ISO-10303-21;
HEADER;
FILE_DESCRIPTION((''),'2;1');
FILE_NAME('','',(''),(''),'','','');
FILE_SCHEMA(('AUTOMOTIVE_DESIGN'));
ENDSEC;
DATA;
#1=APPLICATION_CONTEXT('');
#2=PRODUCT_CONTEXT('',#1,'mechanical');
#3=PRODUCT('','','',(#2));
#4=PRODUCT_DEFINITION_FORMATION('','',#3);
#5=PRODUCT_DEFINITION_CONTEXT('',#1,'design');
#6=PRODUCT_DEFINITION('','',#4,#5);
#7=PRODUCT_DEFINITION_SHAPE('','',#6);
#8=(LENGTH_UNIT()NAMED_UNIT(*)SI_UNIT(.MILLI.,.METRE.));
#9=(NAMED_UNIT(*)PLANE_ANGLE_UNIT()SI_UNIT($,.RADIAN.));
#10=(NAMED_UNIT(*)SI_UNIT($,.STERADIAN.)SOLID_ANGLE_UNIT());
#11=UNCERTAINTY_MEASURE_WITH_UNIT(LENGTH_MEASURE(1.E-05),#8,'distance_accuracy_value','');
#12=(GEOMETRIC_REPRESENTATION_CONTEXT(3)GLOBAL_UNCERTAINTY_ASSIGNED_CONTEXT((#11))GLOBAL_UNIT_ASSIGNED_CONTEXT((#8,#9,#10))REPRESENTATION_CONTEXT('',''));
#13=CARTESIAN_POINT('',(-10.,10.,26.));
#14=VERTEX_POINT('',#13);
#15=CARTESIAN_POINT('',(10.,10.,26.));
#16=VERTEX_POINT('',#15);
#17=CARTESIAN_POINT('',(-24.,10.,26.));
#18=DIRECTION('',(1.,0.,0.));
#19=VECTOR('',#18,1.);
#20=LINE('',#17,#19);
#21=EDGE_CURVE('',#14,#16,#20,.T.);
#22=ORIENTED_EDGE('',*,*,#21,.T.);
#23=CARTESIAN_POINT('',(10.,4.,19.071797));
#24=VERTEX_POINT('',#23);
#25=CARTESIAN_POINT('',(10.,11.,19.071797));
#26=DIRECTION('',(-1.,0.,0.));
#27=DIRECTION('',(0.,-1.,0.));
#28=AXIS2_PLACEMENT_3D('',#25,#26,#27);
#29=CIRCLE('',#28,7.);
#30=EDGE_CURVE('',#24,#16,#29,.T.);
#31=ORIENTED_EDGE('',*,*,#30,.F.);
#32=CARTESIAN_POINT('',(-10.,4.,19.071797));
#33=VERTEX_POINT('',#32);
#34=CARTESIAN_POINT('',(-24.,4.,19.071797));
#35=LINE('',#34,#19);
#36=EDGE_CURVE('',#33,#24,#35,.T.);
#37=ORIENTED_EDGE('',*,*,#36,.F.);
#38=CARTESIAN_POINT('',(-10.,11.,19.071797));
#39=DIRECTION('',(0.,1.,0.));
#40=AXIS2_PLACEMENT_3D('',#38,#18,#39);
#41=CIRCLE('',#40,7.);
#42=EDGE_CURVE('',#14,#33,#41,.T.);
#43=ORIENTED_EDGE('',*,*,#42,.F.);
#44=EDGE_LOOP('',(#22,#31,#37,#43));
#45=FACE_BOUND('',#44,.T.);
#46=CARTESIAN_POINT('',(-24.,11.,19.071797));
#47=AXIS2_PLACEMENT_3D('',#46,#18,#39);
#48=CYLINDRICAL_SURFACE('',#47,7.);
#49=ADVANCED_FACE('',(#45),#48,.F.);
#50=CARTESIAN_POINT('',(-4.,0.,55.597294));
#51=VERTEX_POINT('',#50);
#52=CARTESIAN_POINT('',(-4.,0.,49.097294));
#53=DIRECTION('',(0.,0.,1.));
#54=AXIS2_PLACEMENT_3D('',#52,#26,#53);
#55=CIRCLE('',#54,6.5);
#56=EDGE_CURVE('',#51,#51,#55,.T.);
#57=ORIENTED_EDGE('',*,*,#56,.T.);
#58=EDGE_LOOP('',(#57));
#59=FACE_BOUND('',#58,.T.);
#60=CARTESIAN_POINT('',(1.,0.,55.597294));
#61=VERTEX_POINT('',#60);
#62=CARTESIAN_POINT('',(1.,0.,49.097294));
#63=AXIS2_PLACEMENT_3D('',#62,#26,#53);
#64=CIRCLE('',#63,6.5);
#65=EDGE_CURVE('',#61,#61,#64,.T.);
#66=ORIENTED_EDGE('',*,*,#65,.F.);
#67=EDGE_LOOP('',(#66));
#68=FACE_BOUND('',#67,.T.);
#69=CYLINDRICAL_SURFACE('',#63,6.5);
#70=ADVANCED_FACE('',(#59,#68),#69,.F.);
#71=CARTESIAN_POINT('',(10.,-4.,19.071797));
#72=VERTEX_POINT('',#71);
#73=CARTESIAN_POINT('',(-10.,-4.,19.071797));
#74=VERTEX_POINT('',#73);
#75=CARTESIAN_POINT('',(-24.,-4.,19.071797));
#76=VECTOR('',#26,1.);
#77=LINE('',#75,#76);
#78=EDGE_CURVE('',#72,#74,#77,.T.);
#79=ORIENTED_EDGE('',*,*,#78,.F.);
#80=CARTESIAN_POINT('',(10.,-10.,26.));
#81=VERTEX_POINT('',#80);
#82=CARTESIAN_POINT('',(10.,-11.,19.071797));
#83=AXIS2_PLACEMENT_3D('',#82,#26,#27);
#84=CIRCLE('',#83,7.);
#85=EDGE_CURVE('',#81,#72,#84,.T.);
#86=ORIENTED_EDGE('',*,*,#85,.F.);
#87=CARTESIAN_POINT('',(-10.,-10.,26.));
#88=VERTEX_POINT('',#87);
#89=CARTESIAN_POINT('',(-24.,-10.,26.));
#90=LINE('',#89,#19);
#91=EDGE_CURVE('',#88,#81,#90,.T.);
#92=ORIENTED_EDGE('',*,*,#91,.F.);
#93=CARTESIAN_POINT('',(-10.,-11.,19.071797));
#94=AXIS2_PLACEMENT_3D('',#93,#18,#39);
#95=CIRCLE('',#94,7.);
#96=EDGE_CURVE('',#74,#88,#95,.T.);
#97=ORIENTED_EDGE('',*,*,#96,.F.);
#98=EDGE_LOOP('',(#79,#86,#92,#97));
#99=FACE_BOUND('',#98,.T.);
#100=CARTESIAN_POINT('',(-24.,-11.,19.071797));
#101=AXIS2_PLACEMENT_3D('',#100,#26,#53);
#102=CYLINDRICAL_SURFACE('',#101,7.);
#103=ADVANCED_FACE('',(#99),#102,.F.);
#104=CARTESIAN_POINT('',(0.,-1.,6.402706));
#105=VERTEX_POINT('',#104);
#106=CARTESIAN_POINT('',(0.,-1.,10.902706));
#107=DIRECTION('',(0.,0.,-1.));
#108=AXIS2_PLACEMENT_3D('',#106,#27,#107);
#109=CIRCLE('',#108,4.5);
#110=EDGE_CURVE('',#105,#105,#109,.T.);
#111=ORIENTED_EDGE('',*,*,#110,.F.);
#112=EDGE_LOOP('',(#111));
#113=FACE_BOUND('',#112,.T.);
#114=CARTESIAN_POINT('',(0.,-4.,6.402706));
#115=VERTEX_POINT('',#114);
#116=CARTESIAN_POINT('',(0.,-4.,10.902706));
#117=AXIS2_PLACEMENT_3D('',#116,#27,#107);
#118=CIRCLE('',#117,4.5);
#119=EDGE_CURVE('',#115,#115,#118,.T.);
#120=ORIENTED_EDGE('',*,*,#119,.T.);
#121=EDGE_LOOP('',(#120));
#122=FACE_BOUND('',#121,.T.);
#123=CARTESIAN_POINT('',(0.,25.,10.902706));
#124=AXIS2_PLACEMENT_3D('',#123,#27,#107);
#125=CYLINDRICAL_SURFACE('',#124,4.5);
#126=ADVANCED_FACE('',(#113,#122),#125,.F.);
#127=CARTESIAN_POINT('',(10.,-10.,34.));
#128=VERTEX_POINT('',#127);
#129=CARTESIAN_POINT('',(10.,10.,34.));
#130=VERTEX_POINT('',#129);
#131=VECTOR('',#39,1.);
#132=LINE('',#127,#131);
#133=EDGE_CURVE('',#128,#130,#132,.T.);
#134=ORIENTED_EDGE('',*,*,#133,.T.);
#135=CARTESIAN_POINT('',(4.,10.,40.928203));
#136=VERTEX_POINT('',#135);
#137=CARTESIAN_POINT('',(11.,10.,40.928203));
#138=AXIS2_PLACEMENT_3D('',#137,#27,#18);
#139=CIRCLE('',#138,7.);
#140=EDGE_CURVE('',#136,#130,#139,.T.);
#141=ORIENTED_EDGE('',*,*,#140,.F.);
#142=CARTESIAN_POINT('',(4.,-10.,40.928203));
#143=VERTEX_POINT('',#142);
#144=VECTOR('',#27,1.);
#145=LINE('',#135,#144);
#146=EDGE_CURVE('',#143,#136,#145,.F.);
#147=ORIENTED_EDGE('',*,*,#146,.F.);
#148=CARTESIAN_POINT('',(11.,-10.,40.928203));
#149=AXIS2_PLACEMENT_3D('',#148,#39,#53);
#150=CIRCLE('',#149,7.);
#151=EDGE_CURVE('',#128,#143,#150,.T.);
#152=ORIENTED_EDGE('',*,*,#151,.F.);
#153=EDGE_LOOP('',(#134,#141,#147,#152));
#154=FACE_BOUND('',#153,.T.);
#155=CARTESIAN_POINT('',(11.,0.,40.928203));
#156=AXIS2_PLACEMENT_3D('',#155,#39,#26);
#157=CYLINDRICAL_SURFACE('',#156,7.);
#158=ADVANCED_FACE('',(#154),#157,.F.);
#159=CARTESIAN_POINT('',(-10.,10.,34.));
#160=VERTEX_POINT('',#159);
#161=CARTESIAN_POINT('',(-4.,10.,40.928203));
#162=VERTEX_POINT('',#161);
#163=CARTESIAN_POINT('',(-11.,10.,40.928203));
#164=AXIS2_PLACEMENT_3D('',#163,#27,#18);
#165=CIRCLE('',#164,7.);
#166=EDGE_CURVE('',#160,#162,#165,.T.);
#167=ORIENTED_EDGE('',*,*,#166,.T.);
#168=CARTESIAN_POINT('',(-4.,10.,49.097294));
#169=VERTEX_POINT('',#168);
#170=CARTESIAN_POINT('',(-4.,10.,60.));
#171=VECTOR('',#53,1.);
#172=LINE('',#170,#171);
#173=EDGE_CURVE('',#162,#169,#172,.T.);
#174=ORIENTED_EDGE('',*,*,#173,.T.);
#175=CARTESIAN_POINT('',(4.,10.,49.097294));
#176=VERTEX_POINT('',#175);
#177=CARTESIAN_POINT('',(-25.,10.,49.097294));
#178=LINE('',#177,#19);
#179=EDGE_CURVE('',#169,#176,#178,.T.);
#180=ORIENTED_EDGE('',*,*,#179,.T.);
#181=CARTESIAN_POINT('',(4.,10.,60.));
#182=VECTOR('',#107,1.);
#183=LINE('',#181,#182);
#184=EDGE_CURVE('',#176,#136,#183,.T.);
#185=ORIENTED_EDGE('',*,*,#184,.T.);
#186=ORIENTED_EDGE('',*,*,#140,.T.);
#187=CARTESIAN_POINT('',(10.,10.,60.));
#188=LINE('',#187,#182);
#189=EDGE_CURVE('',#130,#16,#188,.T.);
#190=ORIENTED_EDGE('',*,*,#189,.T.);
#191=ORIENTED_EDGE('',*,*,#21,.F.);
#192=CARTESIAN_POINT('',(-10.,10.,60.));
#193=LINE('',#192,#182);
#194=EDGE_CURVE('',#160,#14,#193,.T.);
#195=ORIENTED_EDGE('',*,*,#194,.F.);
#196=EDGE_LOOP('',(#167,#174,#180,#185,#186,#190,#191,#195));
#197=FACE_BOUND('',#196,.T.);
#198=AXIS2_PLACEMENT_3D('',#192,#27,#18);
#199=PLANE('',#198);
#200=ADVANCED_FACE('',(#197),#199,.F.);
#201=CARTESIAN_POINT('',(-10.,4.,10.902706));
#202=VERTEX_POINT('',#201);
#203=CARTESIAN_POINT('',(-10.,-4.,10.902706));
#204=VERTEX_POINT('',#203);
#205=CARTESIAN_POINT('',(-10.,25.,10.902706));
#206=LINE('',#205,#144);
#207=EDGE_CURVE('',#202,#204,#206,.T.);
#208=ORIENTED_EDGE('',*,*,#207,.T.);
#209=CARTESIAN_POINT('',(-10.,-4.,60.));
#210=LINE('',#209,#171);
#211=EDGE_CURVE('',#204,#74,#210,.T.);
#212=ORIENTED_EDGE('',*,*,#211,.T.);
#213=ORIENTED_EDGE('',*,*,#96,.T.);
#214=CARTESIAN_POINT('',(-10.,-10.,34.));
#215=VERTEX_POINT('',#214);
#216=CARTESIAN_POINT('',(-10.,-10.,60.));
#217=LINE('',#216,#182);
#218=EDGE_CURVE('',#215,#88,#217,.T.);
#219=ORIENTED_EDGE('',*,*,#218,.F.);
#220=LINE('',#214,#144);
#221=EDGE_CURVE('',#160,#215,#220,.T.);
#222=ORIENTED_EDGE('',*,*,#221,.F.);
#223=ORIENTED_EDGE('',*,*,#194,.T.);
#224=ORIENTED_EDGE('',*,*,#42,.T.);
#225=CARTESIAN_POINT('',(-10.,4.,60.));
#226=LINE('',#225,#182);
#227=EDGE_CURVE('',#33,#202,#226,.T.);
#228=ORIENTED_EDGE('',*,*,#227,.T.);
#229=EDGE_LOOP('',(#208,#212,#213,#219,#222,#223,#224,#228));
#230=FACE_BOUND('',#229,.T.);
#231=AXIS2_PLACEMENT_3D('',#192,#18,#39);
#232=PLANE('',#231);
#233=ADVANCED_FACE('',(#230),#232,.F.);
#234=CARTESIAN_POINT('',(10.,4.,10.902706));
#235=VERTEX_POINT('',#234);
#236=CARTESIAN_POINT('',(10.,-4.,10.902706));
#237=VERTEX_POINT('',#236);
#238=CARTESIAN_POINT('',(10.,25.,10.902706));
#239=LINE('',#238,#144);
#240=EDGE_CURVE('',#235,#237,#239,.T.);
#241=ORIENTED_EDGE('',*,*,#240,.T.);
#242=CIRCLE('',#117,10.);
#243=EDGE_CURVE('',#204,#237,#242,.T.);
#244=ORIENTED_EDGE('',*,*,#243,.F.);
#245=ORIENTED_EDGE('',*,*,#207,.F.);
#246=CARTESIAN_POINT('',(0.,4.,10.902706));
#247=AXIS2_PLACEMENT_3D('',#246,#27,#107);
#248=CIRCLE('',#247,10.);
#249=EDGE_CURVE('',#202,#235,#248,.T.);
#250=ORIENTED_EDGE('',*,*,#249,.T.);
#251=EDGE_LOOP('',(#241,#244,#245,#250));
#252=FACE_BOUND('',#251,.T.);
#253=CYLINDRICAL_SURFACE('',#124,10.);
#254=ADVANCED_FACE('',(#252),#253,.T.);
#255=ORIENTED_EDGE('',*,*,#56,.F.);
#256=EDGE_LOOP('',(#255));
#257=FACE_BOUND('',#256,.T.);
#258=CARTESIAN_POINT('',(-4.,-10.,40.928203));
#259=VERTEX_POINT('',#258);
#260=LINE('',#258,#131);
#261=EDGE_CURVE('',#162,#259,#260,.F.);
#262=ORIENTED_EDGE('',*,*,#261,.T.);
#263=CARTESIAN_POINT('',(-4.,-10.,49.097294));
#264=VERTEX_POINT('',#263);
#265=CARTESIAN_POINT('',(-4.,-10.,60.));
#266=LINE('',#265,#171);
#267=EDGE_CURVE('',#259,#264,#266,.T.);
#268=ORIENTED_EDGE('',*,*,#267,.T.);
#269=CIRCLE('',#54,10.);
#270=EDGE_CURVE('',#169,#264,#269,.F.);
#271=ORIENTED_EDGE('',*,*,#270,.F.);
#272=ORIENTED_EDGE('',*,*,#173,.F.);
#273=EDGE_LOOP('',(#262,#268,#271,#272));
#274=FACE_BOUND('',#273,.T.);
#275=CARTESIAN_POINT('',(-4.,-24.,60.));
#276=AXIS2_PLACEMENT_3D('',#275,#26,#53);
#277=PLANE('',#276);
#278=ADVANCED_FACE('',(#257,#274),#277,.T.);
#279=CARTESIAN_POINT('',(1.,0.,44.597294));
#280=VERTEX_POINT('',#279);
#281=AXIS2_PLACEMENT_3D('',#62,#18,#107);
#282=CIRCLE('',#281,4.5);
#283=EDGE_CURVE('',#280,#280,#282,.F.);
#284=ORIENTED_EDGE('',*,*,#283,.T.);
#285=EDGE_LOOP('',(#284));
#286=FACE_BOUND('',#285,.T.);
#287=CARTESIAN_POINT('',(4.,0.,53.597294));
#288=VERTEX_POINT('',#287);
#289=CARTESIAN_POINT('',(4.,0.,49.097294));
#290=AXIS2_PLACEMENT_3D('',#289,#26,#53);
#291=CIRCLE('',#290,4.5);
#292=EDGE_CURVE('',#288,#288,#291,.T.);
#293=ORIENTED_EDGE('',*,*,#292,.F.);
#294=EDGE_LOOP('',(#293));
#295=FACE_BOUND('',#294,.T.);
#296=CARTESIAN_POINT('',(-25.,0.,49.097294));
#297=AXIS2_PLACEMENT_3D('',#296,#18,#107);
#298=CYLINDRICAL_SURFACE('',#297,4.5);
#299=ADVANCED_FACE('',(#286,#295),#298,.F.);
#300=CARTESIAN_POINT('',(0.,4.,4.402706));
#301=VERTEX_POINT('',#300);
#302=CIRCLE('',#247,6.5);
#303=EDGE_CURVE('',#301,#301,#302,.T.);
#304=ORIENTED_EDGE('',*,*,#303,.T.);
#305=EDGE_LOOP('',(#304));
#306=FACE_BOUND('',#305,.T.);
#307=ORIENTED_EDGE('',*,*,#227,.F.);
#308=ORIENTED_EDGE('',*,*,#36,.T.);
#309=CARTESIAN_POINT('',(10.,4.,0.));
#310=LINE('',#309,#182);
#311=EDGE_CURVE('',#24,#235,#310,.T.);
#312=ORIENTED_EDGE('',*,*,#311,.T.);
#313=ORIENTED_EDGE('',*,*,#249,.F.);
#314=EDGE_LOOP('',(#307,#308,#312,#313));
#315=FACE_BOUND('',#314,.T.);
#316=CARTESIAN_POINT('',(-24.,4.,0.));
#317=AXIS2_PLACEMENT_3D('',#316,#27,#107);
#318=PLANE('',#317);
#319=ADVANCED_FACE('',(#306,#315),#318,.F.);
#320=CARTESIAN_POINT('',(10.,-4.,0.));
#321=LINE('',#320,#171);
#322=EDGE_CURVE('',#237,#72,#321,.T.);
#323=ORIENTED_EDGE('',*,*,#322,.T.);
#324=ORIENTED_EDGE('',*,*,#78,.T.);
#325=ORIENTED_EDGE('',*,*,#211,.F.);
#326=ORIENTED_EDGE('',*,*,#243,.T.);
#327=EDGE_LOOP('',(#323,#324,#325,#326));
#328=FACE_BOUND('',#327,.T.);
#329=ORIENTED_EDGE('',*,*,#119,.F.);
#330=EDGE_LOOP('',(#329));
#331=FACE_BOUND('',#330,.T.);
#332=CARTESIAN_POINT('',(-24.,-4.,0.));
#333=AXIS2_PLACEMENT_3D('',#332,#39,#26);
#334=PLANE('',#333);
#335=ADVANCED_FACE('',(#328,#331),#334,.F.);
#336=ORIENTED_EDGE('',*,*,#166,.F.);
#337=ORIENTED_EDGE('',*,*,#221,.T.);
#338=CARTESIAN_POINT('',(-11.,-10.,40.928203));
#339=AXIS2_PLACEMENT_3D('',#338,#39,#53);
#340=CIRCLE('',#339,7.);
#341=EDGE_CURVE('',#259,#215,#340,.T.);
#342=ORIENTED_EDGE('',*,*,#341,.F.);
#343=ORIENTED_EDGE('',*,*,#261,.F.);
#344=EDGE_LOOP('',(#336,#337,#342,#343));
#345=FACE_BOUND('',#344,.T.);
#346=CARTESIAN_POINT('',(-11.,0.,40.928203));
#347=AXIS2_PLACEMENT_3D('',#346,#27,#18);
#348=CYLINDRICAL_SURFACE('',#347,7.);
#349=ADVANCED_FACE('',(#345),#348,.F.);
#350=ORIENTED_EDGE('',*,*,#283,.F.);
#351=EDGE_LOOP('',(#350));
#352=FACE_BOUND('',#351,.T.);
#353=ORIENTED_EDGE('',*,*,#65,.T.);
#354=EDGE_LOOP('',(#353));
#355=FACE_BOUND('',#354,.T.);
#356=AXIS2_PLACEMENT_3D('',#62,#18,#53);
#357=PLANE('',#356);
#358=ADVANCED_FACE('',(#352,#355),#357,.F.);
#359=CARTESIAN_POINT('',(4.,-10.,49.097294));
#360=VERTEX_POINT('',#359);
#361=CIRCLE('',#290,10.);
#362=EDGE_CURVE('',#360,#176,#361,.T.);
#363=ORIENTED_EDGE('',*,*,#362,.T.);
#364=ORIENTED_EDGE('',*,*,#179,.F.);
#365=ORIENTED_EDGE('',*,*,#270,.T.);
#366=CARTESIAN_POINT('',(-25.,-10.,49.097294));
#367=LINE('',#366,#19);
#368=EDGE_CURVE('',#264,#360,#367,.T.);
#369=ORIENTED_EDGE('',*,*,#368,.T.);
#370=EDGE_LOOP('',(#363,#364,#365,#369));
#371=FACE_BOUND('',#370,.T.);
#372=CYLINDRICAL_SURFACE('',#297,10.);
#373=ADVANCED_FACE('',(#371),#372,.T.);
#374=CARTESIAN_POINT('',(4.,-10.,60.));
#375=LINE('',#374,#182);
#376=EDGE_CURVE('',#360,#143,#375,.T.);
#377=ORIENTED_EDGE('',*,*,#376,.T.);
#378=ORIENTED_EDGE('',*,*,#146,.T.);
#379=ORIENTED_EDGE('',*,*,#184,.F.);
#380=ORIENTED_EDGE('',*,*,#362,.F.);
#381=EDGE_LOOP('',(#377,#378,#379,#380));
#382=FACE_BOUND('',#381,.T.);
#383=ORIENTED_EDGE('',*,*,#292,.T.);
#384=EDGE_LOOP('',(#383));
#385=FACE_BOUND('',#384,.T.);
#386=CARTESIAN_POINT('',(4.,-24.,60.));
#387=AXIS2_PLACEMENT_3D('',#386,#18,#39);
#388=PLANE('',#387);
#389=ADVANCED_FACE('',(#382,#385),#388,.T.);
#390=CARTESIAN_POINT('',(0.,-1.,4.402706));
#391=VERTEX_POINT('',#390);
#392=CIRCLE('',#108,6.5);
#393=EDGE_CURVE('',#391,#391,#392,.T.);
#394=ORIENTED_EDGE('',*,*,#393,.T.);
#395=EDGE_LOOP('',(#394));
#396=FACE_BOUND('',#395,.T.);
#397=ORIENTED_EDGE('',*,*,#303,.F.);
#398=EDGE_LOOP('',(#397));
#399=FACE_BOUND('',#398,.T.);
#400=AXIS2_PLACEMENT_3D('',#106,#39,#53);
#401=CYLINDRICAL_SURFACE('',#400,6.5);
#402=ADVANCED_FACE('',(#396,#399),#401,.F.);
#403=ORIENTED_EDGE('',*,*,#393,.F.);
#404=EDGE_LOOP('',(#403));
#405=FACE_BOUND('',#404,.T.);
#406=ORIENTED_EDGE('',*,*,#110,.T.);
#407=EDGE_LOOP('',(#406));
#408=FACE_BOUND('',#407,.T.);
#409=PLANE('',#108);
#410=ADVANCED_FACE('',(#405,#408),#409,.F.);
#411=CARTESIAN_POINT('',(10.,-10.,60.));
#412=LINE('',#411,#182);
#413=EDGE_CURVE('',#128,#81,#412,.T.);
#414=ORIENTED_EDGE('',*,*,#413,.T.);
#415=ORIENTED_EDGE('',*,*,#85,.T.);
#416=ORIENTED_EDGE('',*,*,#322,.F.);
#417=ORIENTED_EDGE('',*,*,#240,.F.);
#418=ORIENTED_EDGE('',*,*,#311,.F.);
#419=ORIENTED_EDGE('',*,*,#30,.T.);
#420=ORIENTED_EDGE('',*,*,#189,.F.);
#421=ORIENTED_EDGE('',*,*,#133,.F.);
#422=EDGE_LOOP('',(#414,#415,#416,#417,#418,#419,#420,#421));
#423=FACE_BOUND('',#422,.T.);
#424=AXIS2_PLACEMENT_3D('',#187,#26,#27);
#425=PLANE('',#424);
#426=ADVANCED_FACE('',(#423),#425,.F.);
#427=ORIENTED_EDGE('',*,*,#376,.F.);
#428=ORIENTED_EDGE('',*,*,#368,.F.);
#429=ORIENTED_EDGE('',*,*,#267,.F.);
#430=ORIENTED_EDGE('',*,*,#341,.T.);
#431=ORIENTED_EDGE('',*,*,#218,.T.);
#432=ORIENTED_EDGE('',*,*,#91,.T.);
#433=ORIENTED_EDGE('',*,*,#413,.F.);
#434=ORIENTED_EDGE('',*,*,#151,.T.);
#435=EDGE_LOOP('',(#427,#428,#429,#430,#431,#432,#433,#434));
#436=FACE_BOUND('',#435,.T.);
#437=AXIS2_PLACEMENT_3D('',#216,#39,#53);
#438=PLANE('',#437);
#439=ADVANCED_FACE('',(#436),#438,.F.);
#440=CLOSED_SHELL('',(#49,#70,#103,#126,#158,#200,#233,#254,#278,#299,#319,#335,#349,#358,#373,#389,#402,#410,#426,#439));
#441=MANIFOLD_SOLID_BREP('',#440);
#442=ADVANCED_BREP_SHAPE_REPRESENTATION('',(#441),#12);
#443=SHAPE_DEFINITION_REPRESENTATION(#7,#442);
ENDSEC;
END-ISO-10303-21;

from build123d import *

# Parameters (mm, degrees)
SKETCH_1_W          = 20
SKETCH_1_H          = 20
EXTRUDE_1_DEPTH     = 60
SKETCH_7_W          = 26
SKETCH_7_H          = 6
CUT_EXTRUDE_6_DEPTH = 34
SKETCH_2_R          = 6.5
CUT_EXTRUDE_9_DEPTH = 5
SKETCH_3_R          = 4.5
CUT_EXTRUDE_2_DEPTH = 29
MOVE_BODY_1_ANGLE   = 90
SKETCH_8_W          = 20
SKETCH_8_H          = 20
EXTRUDE_2_DEPTH     = 8
FILLET_2_R          = 7


# Read off the part's stored shape, not the designer's step: 교차3
with BuildPart() as part:
    # 스케치1 → 보스-돌출1 (new body)
    with BuildSketch(Plane.XY):
        Rectangle(SKETCH_1_W, SKETCH_1_H)
    extrude(amount=EXTRUDE_1_DEPTH)

    # 스케치7 → 컷-돌출6 (cut)
    with BuildSketch(Plane(origin=(10, 0, 0), x_dir=(0, 0, -1), z_dir=(1, 0, 0))):
        with Locations((-13, 7)):
            Rectangle(SKETCH_7_W, SKETCH_7_H)
        with Locations((-13, -7)):
            Rectangle(SKETCH_7_W, SKETCH_7_H)
    cut_extrude_6 = extrude(amount=-CUT_EXTRUDE_6_DEPTH, mode=Mode.SUBTRACT)

    # 스케치2 → 컷-돌출9 (cut)
    with BuildSketch(Plane(origin=(0, 4, 0), x_dir=(-1, 0, 0), z_dir=(0, -1, 0))):
        with Locations(Location((0, -10.902706153, 0), (0, 0, 90))):
            Circle(SKETCH_2_R)
    cut_extrude_9 = extrude(amount=CUT_EXTRUDE_9_DEPTH, mode=Mode.SUBTRACT)

    # 스케치3 → 컷-돌출2 (cut)
    with BuildSketch(Plane(origin=(0, -4, 0), x_dir=(-1, 0, 0), z_dir=(0, -1, 0))):
        with Locations(Location((0, -10.902706153, 0), (0, 0, 90))):
            Circle(SKETCH_3_R)
        with BuildLine():
            Line((-21.262122506, -10.902706153), (-10, -10.902706153))
            ThreePointArc((-10, -10.902706153), (0, -0.902706153), (10, -10.902706153))
            Line((10, -10.902706153), (21.262122506, -10.902706153))
            ThreePointArc((21.262122506, -10.902706153), (0, 10.359416353), (-21.262122506, -10.902706153))
        make_face()
    cut_extrude_2 = extrude(amount=-CUT_EXTRUDE_2_DEPTH, mode=Mode.SUBTRACT)

    # 대칭 복사6: 컷-돌출6, 컷-돌출9, 컷-돌출2 across plane
    add(cut_extrude_6.mirror(Plane.XY.offset(30)), mode=Mode.SUBTRACT)
    add(cut_extrude_9.mirror(Plane.XY.offset(30)), mode=Mode.SUBTRACT)
    add(cut_extrude_2.mirror(Plane.XY.offset(30)), mode=Mode.SUBTRACT)


with BuildPart() as body_2:
    # 교차3: the piece on the far side of the plane
    add(part.part)
    split(bisect_by=Plane.XY.offset(30), keep=Keep.BOTTOM)


with BuildPart() as part_1:
    add(part.part)

    # 교차3
    split(bisect_by=Plane.XY.offset(30), keep=Keep.TOP)


with BuildPart() as part_2:
    # Move Body 1: moved
    add(part_1.part.rotate(Axis((0, 0, 0), (0, 0, 1)), MOVE_BODY_1_ANGLE))


    add(body_2.part)  # 보스-돌출2 merges body 2
    # 스케치8 → 보스-돌출2 (add)
    with BuildSketch(Plane.XY.offset(34)):
        Rectangle(SKETCH_8_W, SKETCH_8_H)
    extrude(amount=-EXTRUDE_2_DEPTH)

    # 필렛2
    # the kernel refuses this fillet: 7 mm, written as the material it adds along each edge
    with BuildSketch(Plane(origin=(-4, 10, 34), x_dir=(0, 0, 1), z_dir=(0, -1, 0)), Plane(origin=(10, -4, 26), x_dir=(0, 0, -1), z_dir=(-1, 0, 0))) as fillet_2_piece_1:
        with BuildLine():
            CenterArc((6.92820323, 7), FILLET_2_R, 188.213210702, 81.786789298)
            Line((0, 6), (-0.138564065, 5.98))
            ThreePointArc((-0.138564065, 5.98), (-0.14, 3), (-0.14, 0))
            Line((-0.14, 0), (0, -0.14))
            Line((0, -0.14), (6.92820323, -0.14))
            Line((6.92820323, -0.14), (6.92820323, 0))
        make_face()
    extrude(amount=20)
    with BuildSketch(Plane(origin=(4, 10, 34), x_dir=(1, 0, 0), z_dir=(0, -1, 0))) as fillet_2_piece_2:
        with BuildLine():
            CenterArc((7, 6.92820323), FILLET_2_R, 180, 81.786789298)
            Line((0, 6.92820323), (-0.14, 6.92820323))
            Line((-0.14, 6.92820323), (-0.14, 0))
            Line((-0.14, 0), (0, -0.14))
            ThreePointArc((0, -0.14), (3, -0.14), (5.98, -0.138564065))
            Line((5.98, -0.138564065), (6, 0))
        make_face()
    extrude(amount=20)
    with BuildSketch(Plane(origin=(10, 4, 26), x_dir=(0, 0, -1), z_dir=(-1, 0, 0))) as fillet_2_piece_3:
        with BuildLine():
            CenterArc((6.92820323, -7), FILLET_2_R, 90, 81.786789298)
            Line((0, -6), (-0.138564065, -5.98))
            ThreePointArc((-0.138564065, -5.98), (-0.14, -3), (-0.14, 0))
            Line((-0.14, 0), (0, 0.14))
            Line((0, 0.14), (6.92820323, 0.14))
            Line((6.92820323, 0.14), (6.92820323, 0))
        make_face()
    extrude(amount=20)


solid = part_2.part
